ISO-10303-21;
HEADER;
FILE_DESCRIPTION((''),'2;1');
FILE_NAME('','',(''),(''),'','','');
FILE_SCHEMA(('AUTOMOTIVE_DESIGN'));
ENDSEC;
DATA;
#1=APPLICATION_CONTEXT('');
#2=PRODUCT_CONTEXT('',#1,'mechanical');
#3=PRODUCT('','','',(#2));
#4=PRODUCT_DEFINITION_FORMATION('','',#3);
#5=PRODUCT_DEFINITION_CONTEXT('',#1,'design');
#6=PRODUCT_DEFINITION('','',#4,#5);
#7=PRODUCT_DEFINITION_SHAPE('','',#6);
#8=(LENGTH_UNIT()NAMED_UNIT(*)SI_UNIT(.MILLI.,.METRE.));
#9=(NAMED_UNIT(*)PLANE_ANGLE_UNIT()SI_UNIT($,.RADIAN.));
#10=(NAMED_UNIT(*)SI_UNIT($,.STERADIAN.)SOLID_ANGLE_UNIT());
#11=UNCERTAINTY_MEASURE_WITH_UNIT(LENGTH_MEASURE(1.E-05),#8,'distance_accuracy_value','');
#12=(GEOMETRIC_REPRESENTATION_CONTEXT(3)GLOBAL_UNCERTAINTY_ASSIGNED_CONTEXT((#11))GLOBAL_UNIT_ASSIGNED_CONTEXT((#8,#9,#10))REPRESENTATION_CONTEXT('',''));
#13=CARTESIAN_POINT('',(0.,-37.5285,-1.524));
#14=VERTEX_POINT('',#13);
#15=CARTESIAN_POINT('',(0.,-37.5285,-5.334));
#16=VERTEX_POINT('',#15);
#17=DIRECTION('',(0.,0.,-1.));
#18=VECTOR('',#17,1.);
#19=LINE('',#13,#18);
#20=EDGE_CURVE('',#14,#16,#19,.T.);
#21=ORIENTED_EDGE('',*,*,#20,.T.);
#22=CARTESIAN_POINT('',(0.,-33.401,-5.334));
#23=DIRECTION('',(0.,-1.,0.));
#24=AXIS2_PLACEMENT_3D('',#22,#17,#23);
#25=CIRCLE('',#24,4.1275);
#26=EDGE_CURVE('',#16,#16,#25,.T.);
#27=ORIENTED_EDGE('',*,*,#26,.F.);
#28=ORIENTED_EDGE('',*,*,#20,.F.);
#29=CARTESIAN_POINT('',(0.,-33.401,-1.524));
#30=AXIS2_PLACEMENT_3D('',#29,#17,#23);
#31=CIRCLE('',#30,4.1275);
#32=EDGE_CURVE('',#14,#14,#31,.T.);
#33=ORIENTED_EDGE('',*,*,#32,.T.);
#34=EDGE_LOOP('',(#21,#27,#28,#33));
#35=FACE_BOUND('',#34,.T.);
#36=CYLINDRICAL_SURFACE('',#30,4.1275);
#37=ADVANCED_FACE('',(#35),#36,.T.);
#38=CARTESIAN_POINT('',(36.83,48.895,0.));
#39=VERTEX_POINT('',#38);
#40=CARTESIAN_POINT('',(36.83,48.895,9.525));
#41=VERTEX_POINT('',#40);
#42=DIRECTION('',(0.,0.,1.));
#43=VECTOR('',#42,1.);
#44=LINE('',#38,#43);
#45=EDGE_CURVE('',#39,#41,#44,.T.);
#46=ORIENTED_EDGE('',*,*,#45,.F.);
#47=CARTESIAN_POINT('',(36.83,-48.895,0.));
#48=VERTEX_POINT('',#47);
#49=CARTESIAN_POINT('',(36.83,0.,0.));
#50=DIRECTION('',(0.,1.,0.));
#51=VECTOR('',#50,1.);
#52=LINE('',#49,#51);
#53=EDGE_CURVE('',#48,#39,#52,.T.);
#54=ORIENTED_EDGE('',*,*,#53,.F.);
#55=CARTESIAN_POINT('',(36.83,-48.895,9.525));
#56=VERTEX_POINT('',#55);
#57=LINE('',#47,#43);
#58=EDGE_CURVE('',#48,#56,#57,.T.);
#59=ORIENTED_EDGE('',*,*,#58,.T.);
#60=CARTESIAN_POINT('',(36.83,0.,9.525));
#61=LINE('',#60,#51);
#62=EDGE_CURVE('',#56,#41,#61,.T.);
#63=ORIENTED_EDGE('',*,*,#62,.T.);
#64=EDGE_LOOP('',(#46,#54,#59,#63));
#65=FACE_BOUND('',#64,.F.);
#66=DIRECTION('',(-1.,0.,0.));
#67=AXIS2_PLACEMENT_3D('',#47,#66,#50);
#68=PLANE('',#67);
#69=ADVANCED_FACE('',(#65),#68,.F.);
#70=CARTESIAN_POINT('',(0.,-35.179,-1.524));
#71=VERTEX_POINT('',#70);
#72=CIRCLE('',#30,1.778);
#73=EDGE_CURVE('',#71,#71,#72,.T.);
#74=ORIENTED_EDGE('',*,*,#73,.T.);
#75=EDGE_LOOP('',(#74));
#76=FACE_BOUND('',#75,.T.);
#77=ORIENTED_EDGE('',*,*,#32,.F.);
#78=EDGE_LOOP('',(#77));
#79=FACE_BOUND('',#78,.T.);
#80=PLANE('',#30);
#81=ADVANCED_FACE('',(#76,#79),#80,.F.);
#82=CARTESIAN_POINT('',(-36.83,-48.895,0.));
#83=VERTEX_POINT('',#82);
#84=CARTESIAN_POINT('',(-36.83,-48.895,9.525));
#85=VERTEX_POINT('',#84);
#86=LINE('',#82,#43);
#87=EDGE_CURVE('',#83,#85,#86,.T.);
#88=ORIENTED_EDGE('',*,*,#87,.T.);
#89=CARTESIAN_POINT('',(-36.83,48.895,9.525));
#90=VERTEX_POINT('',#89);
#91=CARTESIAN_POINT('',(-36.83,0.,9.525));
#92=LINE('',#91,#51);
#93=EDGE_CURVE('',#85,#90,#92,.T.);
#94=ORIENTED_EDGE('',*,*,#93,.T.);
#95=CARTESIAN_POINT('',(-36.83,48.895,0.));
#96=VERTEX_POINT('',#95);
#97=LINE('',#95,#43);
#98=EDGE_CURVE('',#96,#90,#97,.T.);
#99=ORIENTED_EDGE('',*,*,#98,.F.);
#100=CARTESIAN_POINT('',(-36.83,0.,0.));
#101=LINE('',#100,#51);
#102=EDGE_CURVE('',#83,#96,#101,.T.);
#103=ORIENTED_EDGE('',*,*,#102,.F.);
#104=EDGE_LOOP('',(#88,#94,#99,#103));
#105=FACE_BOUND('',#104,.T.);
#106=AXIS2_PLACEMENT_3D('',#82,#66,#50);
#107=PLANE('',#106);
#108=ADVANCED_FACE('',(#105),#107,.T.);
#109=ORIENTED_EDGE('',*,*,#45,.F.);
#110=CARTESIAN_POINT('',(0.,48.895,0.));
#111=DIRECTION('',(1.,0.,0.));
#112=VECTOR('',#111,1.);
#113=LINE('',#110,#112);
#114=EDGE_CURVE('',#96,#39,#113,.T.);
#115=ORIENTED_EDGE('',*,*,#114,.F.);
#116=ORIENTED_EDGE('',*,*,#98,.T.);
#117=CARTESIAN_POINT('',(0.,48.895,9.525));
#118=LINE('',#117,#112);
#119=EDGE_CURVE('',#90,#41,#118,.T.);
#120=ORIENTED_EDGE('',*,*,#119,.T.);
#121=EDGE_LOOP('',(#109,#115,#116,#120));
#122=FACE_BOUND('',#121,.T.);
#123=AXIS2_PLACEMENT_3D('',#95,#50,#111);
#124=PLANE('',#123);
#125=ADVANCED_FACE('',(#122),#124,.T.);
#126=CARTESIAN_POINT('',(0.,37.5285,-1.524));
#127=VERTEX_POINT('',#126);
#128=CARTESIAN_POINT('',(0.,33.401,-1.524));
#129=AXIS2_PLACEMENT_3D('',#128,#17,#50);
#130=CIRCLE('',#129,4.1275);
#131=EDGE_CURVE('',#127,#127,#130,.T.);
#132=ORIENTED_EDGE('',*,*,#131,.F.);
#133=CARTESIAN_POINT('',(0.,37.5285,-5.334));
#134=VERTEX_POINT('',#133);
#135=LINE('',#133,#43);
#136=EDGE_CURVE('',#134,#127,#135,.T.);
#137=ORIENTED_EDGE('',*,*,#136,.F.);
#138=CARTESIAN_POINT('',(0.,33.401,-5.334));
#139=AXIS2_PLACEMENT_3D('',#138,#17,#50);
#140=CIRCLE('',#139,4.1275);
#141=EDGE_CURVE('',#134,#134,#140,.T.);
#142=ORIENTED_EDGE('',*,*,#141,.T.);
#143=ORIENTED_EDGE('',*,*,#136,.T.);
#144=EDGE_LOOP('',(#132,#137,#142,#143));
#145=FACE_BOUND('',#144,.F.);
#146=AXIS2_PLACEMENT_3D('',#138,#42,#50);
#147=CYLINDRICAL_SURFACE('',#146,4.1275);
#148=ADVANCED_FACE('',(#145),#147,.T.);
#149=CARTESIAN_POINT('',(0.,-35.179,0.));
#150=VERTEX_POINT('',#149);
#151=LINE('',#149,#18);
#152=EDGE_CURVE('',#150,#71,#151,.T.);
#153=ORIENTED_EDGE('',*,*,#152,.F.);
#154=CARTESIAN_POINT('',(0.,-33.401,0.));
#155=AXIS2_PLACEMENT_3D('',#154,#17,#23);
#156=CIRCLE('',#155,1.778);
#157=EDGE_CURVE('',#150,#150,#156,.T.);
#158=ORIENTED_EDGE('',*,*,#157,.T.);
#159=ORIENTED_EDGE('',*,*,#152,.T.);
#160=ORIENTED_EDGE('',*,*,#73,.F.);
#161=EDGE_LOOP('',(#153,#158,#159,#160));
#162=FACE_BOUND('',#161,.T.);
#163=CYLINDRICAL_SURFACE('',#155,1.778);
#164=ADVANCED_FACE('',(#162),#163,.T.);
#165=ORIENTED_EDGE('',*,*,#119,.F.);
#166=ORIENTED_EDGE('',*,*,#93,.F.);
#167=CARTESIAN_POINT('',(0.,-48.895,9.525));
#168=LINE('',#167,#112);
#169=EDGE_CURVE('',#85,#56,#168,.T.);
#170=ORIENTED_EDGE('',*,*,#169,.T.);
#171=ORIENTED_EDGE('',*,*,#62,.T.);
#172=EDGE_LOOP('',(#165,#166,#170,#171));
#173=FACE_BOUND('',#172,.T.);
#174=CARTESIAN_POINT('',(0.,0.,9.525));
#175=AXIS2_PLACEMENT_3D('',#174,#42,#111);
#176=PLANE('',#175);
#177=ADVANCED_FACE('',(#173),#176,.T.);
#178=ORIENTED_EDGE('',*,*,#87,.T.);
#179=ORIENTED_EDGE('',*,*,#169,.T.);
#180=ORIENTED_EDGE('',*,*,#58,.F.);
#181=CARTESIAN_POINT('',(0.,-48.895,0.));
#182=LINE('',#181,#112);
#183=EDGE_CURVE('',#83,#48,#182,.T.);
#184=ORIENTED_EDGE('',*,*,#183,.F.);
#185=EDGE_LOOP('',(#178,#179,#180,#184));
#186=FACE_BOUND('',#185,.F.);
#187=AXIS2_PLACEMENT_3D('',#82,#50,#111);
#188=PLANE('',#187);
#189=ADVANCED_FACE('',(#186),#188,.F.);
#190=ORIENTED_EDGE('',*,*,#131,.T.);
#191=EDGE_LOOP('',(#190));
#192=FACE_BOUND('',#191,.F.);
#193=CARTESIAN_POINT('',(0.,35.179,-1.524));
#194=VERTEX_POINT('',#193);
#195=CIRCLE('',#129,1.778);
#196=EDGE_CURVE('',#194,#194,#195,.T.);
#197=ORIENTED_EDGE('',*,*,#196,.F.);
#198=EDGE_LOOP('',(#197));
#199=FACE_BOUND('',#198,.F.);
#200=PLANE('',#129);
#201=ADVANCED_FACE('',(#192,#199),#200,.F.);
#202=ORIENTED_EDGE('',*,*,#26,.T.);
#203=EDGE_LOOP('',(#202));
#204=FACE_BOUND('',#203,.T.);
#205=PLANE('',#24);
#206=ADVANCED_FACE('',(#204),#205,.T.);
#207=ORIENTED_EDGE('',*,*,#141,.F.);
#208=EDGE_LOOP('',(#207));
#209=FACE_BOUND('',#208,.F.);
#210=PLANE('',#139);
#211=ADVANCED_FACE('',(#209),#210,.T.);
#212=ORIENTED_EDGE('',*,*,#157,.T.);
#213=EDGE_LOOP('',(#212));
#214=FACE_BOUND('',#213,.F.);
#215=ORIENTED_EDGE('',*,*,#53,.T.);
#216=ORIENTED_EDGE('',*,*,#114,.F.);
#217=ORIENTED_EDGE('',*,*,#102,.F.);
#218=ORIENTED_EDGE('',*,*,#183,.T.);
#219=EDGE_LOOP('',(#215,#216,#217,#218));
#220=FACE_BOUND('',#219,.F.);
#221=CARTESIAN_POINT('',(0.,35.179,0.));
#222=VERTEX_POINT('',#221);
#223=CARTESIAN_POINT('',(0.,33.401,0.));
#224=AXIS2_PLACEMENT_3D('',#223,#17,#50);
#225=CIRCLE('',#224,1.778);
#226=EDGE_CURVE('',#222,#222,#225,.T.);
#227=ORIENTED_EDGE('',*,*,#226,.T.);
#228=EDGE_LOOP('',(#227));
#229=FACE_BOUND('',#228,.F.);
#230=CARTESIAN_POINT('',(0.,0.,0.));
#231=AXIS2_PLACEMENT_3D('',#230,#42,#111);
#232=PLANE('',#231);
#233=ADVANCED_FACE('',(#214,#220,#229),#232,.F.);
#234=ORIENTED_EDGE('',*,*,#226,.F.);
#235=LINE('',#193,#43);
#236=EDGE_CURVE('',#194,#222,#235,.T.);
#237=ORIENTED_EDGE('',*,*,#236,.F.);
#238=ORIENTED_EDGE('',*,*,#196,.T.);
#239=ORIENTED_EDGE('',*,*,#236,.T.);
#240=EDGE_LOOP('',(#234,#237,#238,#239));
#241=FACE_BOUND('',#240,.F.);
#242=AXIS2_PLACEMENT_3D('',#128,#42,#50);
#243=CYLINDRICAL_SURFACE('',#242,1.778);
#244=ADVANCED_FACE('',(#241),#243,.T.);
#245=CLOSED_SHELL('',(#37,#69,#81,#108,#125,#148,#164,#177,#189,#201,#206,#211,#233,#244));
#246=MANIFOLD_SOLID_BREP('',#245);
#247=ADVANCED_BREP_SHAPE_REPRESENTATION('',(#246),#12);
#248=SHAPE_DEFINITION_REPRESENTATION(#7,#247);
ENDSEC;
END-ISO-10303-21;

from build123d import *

# Parameters (mm, degrees)
F0_W     = 73.66
F0_H     = 97.79
F1_DEPTH = 9.525


# Not quite as in the source:
# - a length typed as a fraction of an inch, garbled in the dataset ("3 / 203.2 mm" for 3/8 in), is restored


with BuildPart() as f1:
    # F0 (on Top) → F1 (new body)
    with BuildSketch(Plane.XY):
        Rectangle(F0_W, F0_H)
    extrude(amount=F1_DEPTH)

    # F2 (on Right) → F3 (revolve)
    with BuildSketch(Plane.YZ):
        Polygon((35.179, 0), (33.401, 0), (33.401, -5.334), (37.5285, -5.334), (37.5285, -1.524), (35.179, -1.524), align=None)
    revolve(axis=Axis((0, 33.401, -2.667), (0, 0, -1)))

    # F2 (on Right) → F4 (revolve)
    with BuildSketch(Plane.YZ):
        Polygon((-33.401, 0), (-35.179, 0), (-35.179, -1.524), (-37.5285, -1.524), (-37.5285, -5.334), (-33.401, -5.334), align=None)
    revolve(axis=Axis((0, -33.401, -2.667), (0, 0, -1)))


solid = f1.part
